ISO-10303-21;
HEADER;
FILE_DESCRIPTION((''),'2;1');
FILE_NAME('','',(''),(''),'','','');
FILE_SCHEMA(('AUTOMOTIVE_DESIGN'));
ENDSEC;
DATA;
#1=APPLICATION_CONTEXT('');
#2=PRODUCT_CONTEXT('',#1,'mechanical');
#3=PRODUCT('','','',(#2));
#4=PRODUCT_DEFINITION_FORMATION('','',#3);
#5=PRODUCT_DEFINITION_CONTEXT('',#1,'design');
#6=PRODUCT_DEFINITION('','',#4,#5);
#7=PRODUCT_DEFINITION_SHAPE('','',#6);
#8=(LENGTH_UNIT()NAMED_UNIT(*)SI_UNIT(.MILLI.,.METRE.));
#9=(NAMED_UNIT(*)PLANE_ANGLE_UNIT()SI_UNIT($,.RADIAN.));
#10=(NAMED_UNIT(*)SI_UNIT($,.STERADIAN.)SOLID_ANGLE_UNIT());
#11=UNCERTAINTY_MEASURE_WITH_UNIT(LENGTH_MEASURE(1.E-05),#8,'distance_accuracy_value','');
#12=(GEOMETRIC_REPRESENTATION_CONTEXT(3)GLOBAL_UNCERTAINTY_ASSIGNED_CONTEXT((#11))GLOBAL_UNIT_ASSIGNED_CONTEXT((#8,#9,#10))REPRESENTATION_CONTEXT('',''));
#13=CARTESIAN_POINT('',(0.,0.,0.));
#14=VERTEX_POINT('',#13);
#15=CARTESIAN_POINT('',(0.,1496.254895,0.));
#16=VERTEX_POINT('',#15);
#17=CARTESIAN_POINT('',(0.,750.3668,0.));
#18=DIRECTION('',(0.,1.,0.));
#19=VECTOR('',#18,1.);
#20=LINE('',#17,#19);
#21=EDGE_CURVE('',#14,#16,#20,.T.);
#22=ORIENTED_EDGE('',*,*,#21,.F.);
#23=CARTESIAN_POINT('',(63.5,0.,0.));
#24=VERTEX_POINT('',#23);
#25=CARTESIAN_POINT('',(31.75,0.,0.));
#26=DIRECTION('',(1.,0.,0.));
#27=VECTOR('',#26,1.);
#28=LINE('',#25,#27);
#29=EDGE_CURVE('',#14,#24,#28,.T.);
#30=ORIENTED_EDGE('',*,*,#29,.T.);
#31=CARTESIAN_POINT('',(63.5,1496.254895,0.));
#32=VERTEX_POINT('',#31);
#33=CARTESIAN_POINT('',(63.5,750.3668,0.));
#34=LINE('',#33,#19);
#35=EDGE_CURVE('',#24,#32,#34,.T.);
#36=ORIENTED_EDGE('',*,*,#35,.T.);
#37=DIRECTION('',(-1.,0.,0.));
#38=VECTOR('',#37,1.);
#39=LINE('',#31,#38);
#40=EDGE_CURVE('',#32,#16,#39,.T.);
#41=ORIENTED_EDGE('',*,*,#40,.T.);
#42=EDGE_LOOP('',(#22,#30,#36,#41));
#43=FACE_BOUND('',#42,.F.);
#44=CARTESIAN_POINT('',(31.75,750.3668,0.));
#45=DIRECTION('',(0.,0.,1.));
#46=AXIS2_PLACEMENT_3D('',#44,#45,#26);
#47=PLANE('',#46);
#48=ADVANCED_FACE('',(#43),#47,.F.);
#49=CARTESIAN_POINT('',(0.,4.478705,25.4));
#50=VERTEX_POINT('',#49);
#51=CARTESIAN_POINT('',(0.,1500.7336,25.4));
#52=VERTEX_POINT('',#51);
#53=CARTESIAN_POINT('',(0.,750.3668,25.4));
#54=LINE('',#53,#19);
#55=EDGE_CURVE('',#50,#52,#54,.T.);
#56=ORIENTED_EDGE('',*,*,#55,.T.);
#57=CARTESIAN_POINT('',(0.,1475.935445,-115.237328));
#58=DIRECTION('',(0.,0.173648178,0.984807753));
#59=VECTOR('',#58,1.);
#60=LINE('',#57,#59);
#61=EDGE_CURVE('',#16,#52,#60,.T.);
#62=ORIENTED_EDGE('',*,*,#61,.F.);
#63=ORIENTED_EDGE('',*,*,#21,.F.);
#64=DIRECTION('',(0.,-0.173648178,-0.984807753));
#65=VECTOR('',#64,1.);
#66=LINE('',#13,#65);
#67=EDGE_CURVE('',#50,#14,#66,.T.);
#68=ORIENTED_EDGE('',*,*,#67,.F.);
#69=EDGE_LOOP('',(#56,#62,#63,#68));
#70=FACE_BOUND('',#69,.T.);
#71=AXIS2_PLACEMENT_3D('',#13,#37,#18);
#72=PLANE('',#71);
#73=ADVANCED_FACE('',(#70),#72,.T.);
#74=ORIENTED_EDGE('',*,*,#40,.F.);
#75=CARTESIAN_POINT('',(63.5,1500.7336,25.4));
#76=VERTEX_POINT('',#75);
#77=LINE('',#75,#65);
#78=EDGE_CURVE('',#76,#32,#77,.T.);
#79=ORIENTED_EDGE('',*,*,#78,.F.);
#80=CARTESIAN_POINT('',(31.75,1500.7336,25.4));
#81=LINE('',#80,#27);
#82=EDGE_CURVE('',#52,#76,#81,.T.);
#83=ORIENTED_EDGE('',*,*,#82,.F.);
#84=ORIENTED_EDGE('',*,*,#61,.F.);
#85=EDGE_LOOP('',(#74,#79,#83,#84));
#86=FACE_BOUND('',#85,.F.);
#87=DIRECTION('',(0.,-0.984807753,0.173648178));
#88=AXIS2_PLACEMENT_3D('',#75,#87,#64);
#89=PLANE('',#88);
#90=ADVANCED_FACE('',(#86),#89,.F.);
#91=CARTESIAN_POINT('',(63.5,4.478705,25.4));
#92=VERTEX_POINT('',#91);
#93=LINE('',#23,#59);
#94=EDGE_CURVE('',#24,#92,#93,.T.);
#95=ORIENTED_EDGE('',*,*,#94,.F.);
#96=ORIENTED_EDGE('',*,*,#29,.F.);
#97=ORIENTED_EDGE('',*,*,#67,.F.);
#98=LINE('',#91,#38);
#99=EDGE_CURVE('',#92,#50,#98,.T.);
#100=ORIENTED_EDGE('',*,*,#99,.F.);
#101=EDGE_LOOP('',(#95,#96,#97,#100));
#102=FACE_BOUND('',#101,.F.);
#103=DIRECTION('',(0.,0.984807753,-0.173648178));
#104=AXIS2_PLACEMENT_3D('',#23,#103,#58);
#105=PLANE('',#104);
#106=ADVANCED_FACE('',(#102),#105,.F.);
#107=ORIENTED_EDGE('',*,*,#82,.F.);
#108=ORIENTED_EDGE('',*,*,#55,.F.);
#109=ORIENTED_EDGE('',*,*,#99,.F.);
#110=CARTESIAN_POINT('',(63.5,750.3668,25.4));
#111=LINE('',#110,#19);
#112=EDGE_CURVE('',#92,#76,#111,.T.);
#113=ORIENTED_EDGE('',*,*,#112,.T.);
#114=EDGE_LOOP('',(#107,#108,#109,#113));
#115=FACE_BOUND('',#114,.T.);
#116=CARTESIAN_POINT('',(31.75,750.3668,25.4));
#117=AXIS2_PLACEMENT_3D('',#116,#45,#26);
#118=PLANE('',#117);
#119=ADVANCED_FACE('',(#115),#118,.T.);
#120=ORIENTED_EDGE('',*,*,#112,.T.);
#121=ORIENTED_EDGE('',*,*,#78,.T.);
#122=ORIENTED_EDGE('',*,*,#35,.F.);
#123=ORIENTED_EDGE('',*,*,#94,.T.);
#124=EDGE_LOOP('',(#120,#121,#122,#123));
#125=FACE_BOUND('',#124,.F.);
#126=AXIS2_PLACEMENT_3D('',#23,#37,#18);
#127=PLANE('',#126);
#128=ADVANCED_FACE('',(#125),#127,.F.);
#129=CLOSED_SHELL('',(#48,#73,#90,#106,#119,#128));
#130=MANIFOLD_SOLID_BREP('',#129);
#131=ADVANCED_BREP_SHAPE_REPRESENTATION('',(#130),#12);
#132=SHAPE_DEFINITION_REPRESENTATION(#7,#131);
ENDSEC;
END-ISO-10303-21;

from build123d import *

# Parameters (mm, degrees)
F0_W     = 63.5
F0_H     = 1500.7336
F1_DEPTH = 25.4
F3_DEPTH = 63.501


# Not quite as in the source:
# - a feature names something its author has since deleted; it is built from what else it names


with BuildPart() as f1:
    # F0 (on Top) → F1 (new body)
    with BuildSketch(Plane.XY):
        with Locations((31.75, 750.3668)):
            Rectangle(F0_W, F0_H)
    extrude(amount=F1_DEPTH)

    # F2 (on face) → F3 (cut, through all)
    with BuildSketch(Plane.YZ.offset(63.5)):
        Polygon((0, 25.4), (0, 0), (4.47870531, 25.4), align=None)
        Polygon((1500.7336, 25.4), (1496.25489469, 0), (1500.7336, 0), align=None)
    extrude(amount=-F3_DEPTH, mode=Mode.SUBTRACT)


solid = f1.part
